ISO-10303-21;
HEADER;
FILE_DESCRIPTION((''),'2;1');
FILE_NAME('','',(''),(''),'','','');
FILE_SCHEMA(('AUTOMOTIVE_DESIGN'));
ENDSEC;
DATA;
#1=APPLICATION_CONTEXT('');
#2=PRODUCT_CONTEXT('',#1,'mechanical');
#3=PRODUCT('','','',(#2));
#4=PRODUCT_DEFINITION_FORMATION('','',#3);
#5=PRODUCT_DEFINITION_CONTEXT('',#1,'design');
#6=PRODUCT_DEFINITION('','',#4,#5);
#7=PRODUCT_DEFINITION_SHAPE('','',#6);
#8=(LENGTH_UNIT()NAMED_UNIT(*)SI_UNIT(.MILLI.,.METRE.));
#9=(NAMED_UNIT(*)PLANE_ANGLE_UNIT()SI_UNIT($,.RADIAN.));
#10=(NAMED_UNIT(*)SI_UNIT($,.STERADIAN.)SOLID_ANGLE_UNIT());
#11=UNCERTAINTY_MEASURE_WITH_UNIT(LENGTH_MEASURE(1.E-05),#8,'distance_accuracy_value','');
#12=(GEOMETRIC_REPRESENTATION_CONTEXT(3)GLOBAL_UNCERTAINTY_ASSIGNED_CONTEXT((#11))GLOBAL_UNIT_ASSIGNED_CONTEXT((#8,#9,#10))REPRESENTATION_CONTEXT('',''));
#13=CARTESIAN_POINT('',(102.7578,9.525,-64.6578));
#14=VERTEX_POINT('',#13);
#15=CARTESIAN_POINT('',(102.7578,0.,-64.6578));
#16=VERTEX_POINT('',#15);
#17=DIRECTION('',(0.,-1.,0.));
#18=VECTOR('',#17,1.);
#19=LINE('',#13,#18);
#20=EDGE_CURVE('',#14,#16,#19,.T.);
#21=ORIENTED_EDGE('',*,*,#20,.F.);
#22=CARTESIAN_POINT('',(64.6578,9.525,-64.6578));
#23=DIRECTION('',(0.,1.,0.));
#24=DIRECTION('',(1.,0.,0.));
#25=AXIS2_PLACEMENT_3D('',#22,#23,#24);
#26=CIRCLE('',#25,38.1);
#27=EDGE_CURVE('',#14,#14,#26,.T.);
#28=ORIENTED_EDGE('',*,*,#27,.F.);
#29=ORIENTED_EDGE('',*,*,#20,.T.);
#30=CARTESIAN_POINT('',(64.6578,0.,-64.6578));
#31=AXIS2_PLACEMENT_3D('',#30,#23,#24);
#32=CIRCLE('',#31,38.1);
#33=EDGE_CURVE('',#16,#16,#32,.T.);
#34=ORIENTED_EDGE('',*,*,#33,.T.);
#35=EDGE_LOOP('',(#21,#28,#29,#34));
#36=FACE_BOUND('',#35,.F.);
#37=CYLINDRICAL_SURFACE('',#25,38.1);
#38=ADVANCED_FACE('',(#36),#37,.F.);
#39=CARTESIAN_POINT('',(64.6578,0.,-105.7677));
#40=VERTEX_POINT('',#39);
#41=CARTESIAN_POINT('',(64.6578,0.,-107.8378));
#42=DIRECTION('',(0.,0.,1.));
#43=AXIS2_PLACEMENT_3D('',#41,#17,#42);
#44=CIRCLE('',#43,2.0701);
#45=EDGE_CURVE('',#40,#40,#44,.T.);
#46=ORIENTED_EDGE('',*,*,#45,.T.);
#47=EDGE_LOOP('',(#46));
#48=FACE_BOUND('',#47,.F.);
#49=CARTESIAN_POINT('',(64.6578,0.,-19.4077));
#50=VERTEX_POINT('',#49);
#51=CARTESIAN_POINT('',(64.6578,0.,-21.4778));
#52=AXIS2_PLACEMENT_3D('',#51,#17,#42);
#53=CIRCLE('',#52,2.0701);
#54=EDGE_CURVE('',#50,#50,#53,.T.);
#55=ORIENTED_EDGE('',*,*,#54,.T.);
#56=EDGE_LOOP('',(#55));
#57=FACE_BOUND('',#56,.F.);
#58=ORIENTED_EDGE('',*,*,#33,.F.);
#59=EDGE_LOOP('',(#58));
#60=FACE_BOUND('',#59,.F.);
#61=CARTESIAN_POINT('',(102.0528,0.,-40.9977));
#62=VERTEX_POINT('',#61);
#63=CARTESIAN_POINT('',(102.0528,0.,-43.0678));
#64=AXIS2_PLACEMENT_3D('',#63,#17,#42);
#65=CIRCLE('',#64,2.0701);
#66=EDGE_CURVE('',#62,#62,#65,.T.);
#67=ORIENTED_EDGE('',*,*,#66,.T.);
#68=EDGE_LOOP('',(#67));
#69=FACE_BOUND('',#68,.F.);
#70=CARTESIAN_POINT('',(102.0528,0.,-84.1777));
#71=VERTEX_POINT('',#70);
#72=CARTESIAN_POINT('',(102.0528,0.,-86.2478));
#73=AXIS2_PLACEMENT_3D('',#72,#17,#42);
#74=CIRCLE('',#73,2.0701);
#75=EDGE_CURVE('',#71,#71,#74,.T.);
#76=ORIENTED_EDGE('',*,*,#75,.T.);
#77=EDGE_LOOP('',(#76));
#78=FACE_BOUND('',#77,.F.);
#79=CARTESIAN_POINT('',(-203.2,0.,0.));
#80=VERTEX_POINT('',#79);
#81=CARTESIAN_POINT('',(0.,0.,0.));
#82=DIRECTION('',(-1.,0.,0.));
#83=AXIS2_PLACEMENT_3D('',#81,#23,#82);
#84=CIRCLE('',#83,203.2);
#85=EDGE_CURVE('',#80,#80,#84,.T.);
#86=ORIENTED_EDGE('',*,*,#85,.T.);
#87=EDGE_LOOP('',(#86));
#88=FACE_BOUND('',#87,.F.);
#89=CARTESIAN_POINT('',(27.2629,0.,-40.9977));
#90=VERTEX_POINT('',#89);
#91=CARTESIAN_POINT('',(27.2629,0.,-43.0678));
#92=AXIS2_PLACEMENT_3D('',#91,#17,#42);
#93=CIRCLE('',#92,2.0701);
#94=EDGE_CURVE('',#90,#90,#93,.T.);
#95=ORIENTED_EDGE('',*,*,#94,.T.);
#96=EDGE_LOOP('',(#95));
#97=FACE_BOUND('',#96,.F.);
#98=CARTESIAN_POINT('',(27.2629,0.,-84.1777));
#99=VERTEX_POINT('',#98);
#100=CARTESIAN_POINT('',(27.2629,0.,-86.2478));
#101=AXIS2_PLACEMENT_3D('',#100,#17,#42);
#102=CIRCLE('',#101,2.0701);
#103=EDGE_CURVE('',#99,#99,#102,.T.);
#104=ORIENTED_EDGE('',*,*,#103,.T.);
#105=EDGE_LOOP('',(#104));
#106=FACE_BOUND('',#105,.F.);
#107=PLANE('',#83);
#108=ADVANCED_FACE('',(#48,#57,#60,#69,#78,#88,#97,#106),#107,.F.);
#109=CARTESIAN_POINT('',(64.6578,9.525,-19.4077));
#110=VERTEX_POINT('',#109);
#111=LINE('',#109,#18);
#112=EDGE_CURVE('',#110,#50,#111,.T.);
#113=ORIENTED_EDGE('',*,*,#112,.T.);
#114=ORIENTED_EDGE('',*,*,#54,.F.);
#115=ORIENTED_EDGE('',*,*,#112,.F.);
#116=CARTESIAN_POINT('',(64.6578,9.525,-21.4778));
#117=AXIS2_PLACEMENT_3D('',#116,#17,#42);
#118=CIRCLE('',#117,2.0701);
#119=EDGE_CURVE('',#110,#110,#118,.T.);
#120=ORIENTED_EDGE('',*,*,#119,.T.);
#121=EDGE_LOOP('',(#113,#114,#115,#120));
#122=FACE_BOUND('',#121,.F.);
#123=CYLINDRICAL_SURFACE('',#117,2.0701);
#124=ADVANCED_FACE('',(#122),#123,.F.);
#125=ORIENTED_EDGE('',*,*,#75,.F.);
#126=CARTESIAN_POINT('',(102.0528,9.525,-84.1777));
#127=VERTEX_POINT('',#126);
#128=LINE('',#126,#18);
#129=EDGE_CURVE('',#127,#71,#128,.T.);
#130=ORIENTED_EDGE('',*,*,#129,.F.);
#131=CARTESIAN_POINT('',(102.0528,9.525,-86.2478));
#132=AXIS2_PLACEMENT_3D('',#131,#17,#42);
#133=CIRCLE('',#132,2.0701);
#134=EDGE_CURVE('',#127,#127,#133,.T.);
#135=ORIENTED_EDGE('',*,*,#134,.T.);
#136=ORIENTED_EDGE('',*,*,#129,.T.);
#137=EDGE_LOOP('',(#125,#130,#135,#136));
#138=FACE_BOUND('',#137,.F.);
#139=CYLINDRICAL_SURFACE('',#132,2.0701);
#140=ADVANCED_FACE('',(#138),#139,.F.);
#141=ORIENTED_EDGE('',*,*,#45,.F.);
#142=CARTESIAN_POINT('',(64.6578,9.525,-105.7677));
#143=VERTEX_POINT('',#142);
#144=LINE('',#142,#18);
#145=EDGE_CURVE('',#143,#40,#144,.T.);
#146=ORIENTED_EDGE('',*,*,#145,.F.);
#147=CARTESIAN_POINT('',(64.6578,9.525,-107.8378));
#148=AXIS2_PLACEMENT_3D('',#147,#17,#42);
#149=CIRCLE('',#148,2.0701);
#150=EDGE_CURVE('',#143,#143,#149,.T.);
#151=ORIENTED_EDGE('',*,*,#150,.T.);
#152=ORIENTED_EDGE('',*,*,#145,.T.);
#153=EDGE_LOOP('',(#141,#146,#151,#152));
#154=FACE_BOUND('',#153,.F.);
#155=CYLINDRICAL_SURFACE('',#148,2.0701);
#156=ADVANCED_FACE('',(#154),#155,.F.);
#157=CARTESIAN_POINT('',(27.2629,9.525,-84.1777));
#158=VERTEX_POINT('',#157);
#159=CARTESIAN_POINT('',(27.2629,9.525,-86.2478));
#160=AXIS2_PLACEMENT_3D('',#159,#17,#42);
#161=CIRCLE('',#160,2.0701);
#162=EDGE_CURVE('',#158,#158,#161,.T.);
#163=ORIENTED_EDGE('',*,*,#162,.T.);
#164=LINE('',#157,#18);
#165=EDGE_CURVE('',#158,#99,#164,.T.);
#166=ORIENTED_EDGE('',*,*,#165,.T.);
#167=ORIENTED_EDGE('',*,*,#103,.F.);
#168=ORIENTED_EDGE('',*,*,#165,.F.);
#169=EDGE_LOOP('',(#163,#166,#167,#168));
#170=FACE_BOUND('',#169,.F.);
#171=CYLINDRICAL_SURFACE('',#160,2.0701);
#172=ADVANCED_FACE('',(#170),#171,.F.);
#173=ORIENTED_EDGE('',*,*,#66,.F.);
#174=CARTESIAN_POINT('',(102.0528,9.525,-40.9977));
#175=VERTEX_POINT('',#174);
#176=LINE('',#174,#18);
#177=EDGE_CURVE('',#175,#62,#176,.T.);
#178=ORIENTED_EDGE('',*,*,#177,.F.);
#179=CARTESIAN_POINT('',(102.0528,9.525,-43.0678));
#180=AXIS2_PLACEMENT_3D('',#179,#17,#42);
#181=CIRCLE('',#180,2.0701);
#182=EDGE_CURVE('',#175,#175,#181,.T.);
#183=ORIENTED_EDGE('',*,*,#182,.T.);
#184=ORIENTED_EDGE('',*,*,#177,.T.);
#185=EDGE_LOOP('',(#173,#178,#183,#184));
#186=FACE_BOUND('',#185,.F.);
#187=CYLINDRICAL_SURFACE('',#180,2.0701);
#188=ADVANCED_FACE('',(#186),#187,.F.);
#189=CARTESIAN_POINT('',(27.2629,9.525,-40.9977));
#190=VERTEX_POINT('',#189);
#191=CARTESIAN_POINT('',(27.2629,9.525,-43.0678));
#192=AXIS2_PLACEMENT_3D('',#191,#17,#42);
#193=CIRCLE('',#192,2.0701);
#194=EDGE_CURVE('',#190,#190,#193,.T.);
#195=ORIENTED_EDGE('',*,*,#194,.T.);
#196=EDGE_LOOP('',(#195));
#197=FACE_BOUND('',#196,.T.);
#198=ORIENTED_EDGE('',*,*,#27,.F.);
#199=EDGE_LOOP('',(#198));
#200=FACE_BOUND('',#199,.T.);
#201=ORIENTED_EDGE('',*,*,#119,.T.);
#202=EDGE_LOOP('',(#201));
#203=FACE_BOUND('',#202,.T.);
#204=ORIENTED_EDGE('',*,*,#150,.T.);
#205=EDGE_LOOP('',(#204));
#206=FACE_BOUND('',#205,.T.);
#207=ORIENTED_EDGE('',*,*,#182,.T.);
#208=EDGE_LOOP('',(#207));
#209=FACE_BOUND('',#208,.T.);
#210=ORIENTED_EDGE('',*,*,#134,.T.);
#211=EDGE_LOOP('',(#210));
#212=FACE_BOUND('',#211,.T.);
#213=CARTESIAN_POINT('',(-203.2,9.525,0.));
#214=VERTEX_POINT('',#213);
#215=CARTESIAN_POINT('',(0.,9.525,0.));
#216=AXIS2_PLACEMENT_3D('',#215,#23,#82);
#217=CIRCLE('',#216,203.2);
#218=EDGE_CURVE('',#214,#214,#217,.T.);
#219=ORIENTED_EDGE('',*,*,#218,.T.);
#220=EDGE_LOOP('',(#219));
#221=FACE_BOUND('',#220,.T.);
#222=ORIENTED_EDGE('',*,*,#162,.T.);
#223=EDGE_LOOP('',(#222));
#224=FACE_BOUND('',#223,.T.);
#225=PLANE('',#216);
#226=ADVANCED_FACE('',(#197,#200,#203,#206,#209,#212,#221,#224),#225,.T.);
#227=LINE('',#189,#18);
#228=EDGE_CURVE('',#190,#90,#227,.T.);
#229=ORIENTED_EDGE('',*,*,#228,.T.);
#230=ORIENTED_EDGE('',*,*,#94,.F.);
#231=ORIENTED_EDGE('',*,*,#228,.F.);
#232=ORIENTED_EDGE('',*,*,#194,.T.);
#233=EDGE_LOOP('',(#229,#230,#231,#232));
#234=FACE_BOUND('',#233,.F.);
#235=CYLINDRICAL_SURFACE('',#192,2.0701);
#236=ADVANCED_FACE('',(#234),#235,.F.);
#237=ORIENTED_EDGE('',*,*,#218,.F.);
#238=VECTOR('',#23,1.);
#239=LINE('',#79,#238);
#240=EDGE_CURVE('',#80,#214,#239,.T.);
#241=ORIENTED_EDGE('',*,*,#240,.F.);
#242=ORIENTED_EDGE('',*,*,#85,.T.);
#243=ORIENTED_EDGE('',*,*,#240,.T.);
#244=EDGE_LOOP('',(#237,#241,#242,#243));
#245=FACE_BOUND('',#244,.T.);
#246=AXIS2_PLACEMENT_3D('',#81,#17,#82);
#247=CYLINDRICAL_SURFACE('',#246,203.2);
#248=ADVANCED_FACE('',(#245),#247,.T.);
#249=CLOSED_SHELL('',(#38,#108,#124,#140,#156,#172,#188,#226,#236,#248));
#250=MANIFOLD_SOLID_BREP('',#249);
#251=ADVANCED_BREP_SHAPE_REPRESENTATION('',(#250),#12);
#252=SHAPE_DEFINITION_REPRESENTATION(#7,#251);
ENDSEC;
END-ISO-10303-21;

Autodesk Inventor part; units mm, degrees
ref_plane "YZ Plane" through (0, 0, 0) normal (1, 0, 0) x (0, 1, 0)
ref_plane "XZ Plane" through (0, 0, 0) normal (0, 1, 0) x (-1, 0, 0)
ref_plane "XY Plane" through (0, 0, 0) normal (0, 0, 1) x (1, 0, 0)
sketch "Sketch1" plane through (0, 0, 0) normal (0, 1, 0) x (-1, 0, 0)
  circle A0 centre (0, 0) radius 203.2
  dimension "d0" = 406.4
extrude "Extrusion1" add sketch "Sketch1" along normal blind 9.525
sketch "Sketch2" plane through (0, 9.525, 0) normal (0, 1, 0) x (1, 0, 0)
  line L0 (0, 0) -> (64.6578, 64.6578) construction
  line L1 (0, 0) -> (91.44, 0) construction
  line L2 (64.6578, 64.6578) -> (102.0528, 86.2478)
  line L3 (64.6578, 64.6578) -> (107.8378, 64.6578) construction
  line L4 (64.6578, 64.6578) -> (64.6578, 107.8378)
  line L5 (64.6578, 64.6578) -> (27.2629, 86.2478)
  line L6 (64.6578, 64.6578) -> (27.2629, 43.0678)
  line L7 (64.6578, 64.6578) -> (64.6578, 21.4778)
  line L8 (64.6578, 64.6578) -> (102.0528, 43.0678)
  dimension "d3" = 91.44
  dimension "d4" = 45
  dimension "d5" = 43.18
  dimension "d6" = 30
  dimension "d9" = 360
hole "Hole1" at (64.6578, 9.525, -107.8378) at (27.2629, 9.525, -86.2478) at (27.2629, 9.525, -43.0678) at (102.0528, 9.525, -43.0678) at (102.0528, 9.525, -86.2478) at (64.6578, 9.525, -21.4778) direction (0, -1, 0) diameter 4.1402 end up to surface
sketch "Sketch3" plane through (0, 9.525, 0) normal (0, 1, 0) x (1, 0, 0)
  line L0 (0, 0) -> (64.6578, 64.6578) construction
  line L1 (0, 0) -> (91.44, 0) construction
  circle A0 centre (64.6578, 64.6578) radius 38.1
  dimension "d18" = 91.44
  dimension "d19" = 45
  dimension "d20" = 76.2
extrude "Extrusion2" cut sketch "Sketch3" against normal up to surface (9.525 mm away)
properties part number "2K8 stage" material "Copper"
